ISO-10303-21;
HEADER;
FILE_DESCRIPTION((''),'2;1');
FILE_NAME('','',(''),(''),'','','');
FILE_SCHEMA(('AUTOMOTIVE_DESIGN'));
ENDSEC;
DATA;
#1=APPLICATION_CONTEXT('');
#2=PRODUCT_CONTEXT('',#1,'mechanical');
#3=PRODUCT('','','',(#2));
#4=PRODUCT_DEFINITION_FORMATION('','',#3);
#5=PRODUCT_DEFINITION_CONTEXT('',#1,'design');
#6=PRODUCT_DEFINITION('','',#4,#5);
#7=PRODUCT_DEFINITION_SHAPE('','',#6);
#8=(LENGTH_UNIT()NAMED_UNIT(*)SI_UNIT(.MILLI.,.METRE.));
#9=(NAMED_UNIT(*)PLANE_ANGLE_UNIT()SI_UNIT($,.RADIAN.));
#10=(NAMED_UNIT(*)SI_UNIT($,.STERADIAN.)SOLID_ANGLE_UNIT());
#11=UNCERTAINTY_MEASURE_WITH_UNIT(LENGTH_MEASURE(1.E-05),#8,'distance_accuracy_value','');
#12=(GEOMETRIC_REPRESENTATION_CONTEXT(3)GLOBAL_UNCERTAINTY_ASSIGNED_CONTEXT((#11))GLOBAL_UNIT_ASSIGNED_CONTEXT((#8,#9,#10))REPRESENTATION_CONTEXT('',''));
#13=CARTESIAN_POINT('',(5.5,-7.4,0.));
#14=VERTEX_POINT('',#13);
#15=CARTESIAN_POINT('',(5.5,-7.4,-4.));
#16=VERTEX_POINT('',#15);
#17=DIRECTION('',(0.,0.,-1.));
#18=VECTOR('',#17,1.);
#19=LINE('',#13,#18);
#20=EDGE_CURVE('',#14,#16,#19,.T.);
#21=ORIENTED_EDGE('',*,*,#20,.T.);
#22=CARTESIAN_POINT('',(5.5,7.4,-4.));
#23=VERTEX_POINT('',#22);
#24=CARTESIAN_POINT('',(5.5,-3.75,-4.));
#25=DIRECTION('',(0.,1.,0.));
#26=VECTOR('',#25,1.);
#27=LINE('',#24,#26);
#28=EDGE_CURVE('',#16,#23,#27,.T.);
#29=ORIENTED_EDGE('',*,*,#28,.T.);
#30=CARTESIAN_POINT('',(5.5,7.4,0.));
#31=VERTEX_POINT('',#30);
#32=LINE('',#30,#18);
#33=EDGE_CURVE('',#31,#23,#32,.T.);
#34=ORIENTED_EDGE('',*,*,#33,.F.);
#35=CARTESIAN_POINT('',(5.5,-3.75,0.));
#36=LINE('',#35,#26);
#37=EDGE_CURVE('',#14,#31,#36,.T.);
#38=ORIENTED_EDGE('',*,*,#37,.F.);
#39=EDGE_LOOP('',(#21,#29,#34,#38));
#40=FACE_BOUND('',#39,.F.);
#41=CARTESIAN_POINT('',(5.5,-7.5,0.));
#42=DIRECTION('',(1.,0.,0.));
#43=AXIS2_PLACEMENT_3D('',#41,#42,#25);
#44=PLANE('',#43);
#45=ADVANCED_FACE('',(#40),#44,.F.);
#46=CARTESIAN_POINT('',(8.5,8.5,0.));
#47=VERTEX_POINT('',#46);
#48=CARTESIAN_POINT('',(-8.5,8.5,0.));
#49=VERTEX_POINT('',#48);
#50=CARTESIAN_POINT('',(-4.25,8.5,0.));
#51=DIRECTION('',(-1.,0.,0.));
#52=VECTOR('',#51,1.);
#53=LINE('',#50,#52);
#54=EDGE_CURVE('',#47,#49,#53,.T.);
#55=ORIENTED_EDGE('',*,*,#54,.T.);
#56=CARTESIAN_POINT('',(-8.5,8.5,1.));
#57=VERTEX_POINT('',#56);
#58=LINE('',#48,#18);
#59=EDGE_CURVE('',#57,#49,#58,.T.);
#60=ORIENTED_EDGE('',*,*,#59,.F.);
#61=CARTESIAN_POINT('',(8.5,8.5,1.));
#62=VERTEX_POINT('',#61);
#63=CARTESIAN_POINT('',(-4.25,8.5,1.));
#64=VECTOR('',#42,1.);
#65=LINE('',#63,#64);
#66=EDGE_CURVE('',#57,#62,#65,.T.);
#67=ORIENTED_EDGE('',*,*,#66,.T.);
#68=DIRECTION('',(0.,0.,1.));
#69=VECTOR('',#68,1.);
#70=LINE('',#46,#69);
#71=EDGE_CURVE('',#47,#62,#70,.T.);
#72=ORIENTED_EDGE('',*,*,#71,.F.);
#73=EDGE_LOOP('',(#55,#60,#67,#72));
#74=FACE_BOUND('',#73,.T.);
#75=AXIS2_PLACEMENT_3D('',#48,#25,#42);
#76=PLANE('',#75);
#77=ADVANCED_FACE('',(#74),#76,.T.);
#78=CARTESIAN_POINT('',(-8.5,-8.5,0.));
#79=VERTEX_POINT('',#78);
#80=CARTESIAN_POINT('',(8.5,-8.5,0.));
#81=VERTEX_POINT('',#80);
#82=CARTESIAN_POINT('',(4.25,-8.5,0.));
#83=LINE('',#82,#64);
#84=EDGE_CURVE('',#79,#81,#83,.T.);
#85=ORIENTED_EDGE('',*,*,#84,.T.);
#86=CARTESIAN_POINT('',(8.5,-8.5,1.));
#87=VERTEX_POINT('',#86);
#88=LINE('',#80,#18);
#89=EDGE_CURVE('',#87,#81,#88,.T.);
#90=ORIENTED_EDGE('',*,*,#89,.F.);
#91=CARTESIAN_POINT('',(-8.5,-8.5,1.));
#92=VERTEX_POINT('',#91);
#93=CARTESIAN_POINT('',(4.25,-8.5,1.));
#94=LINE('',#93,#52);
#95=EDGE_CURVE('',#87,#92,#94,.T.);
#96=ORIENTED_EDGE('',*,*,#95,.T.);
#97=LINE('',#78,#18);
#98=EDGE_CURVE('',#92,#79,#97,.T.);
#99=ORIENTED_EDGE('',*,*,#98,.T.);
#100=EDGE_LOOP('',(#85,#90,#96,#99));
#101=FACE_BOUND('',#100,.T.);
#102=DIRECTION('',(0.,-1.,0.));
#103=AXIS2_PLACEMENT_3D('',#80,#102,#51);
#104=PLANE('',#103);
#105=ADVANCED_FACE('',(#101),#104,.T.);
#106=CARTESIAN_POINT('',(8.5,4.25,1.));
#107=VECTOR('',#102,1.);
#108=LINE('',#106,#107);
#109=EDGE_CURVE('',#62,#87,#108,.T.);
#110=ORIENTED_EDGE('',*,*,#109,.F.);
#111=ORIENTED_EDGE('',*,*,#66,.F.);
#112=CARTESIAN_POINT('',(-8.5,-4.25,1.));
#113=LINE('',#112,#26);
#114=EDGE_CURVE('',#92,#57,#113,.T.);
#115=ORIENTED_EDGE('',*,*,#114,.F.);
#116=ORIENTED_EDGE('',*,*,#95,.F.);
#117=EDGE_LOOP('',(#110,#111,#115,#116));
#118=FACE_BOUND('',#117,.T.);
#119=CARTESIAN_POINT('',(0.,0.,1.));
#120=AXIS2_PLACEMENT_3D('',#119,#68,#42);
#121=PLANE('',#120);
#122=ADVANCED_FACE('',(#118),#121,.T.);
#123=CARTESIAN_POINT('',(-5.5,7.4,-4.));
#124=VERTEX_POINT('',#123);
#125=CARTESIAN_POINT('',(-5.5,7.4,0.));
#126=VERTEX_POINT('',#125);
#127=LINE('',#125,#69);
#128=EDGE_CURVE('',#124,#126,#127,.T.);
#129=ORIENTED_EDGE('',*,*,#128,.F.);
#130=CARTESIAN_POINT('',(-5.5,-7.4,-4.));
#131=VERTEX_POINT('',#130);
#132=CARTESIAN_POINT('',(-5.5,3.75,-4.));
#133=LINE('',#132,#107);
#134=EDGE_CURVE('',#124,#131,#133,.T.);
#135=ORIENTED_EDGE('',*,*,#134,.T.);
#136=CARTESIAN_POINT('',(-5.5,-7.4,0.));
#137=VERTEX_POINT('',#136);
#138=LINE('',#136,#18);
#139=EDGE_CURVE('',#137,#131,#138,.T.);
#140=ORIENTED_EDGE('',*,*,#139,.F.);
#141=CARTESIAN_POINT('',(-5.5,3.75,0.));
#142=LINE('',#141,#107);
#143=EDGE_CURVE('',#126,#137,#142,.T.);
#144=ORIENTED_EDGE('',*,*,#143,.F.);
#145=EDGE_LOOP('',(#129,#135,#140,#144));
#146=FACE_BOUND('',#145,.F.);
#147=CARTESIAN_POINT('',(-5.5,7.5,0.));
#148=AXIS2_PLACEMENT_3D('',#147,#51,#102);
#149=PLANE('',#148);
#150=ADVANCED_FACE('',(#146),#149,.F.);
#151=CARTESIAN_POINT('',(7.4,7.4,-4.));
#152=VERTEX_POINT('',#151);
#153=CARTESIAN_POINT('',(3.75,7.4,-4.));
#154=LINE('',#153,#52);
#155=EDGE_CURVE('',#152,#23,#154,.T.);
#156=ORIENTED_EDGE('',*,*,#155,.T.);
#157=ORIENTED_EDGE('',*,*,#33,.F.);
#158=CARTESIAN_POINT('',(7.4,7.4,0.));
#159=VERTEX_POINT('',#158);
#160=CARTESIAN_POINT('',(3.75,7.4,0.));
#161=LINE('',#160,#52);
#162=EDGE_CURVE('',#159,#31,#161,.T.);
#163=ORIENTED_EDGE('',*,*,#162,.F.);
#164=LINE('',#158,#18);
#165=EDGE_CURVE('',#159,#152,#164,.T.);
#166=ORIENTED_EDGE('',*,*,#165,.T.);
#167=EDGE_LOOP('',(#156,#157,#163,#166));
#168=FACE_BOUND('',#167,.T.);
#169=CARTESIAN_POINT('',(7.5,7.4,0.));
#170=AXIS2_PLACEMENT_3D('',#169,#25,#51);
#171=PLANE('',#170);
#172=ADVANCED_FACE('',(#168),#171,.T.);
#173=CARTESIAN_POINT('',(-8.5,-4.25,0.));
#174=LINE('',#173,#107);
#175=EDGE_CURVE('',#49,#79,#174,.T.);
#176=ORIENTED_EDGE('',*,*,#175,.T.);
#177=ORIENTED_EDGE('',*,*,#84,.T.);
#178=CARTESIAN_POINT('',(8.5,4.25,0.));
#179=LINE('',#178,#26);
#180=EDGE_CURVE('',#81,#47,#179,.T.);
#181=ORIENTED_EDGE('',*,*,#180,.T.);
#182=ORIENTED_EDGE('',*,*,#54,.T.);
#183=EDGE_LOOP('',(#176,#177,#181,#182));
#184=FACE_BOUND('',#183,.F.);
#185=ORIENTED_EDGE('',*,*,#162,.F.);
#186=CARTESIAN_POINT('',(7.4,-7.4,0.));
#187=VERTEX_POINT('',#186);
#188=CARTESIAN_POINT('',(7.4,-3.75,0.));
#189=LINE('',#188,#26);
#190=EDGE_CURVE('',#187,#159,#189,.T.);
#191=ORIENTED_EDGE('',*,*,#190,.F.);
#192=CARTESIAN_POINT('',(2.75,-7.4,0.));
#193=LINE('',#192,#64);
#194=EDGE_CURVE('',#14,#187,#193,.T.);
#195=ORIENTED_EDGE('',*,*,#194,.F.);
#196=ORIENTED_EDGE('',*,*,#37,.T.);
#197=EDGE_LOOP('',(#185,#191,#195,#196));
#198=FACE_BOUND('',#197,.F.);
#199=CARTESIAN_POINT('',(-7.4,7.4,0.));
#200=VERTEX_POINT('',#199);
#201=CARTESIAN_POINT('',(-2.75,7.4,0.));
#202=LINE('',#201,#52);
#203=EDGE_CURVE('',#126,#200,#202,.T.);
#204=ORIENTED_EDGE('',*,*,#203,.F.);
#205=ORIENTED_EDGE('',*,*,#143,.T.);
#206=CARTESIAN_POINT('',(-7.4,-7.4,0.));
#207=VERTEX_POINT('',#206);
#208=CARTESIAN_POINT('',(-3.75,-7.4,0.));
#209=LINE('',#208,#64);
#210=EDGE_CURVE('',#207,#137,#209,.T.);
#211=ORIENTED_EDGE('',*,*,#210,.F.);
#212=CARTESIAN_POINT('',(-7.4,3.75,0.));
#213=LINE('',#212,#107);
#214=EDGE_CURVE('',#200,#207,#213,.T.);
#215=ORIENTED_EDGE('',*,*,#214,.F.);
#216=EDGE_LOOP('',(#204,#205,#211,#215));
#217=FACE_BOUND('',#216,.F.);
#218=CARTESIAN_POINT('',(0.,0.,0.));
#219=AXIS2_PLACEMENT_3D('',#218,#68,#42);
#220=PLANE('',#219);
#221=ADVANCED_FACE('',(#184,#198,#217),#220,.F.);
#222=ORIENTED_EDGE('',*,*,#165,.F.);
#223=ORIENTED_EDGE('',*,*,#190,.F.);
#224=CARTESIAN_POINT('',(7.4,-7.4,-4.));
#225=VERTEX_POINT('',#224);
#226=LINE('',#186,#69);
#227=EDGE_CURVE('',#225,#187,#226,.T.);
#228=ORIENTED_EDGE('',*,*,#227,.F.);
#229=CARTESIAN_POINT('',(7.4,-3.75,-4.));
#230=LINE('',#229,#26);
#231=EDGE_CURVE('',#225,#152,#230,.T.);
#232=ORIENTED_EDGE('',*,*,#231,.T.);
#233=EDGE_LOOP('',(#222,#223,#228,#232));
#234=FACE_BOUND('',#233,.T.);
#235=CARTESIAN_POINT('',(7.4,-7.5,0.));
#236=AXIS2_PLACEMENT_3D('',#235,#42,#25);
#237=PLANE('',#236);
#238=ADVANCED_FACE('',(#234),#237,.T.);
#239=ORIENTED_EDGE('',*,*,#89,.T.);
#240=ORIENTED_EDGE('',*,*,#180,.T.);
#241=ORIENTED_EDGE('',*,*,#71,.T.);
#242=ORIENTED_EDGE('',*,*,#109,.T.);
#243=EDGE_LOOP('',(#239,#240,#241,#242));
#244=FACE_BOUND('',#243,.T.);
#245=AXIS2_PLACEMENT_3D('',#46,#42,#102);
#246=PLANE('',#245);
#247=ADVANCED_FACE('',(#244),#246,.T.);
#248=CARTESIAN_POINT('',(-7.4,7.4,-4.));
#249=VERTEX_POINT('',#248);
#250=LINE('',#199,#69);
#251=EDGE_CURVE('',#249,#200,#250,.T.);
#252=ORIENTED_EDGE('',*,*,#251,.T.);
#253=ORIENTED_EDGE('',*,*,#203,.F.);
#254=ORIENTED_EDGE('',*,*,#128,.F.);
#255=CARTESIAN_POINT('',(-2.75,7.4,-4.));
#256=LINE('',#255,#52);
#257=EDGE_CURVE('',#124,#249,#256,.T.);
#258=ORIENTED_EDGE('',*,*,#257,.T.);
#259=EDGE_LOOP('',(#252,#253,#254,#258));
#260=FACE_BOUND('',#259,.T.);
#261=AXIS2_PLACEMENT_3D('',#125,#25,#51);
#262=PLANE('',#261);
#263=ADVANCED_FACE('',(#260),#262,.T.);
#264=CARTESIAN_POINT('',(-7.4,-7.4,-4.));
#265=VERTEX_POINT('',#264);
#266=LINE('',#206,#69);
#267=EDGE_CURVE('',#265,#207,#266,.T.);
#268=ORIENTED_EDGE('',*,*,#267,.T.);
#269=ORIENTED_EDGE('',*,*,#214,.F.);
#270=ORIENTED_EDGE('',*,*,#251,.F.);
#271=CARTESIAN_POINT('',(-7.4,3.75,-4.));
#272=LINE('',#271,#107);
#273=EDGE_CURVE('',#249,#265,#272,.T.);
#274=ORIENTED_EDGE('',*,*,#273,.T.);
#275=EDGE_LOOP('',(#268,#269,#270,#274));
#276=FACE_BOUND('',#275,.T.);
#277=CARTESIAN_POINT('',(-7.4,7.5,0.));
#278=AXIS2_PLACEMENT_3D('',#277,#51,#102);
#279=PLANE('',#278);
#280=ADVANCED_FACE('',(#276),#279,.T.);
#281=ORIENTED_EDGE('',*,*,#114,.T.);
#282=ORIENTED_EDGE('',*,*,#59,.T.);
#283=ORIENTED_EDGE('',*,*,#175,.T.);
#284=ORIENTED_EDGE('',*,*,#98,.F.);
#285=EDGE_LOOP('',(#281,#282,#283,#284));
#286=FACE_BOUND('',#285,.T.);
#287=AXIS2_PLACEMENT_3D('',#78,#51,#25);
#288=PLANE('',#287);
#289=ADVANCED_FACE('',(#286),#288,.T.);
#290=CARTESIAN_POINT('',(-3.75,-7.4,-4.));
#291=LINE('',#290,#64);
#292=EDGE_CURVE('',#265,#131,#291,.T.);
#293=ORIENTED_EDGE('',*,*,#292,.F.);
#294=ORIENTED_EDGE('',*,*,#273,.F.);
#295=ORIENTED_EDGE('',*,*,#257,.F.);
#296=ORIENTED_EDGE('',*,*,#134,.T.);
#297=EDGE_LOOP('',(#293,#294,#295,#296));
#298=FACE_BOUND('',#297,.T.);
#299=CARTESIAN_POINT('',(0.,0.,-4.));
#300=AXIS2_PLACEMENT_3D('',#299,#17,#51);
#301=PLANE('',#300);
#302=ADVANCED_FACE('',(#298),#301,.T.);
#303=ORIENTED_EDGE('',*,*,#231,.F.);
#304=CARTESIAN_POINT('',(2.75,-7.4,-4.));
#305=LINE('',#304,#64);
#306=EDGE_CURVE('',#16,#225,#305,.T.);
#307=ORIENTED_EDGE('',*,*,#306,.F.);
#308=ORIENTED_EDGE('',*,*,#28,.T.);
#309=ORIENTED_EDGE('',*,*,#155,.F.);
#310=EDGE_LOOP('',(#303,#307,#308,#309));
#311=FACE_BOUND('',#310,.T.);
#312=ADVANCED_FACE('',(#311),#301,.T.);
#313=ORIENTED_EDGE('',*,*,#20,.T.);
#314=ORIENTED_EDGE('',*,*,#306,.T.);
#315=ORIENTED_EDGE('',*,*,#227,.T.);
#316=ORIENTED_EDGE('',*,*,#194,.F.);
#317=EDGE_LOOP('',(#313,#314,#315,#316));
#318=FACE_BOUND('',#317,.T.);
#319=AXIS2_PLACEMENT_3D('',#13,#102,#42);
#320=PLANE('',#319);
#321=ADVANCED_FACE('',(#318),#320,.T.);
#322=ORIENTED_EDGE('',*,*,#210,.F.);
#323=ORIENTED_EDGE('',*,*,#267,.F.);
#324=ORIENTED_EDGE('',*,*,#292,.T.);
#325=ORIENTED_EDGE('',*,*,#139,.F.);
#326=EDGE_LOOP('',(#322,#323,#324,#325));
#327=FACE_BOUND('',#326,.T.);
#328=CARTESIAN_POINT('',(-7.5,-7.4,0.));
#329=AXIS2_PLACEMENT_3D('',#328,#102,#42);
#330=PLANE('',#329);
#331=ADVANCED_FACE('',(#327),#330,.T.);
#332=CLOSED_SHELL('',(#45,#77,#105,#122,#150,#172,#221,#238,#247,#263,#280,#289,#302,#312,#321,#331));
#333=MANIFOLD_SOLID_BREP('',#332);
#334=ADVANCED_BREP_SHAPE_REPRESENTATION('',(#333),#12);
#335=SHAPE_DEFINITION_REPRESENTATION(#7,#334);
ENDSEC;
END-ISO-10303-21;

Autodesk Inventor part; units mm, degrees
ref_plane "YZ Plane" through (0, 0, 0) normal (1, 0, 0) x (0, 1, 0)
ref_plane "XZ Plane" through (0, 0, 0) normal (0, 1, 0) x (-1, 0, 0)
ref_plane "XY Plane" through (0, 0, 0) normal (0, 0, 1) x (1, 0, 0)
sketch "Sketch1" plane through (0, 0, 0) normal (0, 0, 1) x (1, 0, 0)
  line L0 (7.5, 7.5) -> (-7.5, 7.5) projected
  line L1 (7.5, 7.5) -> (-7.5, 7.5) projected
  line L2 (-7.5, 7.5) -> (-7.5, -7.5) projected
  line L3 (-7.5, -7.5) -> (7.5, -7.5) projected
  line L4 (7.5, -7.5) -> (7.5, 7.5) projected
  line L5 (-8.5, 8.5) -> (8.5, 8.5) projected
  line L6 (8.5, 8.5) -> (8.5, -8.5) projected
  line L7 (8.5, -8.5) -> (-8.5, -8.5) projected
  line L8 (-8.5, -8.5) -> (-8.5, 8.5) projected
  point P0 (0, 0)
extrude "Extrusion1" add sketch "Sketch1" along normal blind 1 contours L4 L3 L2 L0 | L5 L6 L7 L8
sketch "Sketch2" plane through (0, 0, 0) normal (0, 0, -1) x (-1, 0, 0)
  line L0 (-7.5, 7.5) -> (7.5, 7.5) projected
  line L1 (7.5, 7.5) -> (7.5, -7.5) projected
  line L2 (7.5, -7.5) -> (-7.5, -7.5) projected
  line L3 (-7.5, -7.5) -> (-7.5, 7.5) projected
  line L4 (8.5, 8.5) -> (-8.5, 8.5) projected
  line L5 (-8.5, 8.5) -> (-8.5, -8.5) projected
  line L6 (-8.5, -8.5) -> (8.5, -8.5) projected
  line L7 (8.5, -8.5) -> (8.5, 8.5) projected
  line L8 (-7.5, -7.5) -> (-5.5, -7.5)
  line L9 (-5.5, -7.5) -> (-5.5, 7.5)
  line L10 (-5.5, 7.5) -> (-7.5, 7.5)
  line L11 (-7.5, 7.5) -> (-7.5, -7.5)
  line L12 (7.5, 7.5) -> (5.5, 7.5)
  line L13 (5.5, 7.5) -> (5.5, -7.5)
  line L14 (5.5, -7.5) -> (7.5, -7.5)
  line L15 (7.5, -7.5) -> (7.5, 7.5)
  point P0 (0, 0)
  dimension "d2" = 2
  dimension "d3" = 2
extrude "Extrusion2" add sketch "Sketch2" along normal blind 4 contours L0 L9 L2 L3 | L0 L1 L2 L13
thicken "Thicken1" operation add thickness 0.1 both sides no extend neighbours yes toward (0, -1, 0) faces at (6.1667, 7.5, -1.3333) (7.5, 2.5, -1.3333) (6.8333, -7.5, -1.3333)
thicken "Thicken2" operation add thickness 0.1 both sides no extend neighbours yes toward (0, 1, 0) faces at (-6.1667, -7.5, -1.3333) (-7.5, -2.5, -1.3333) (-6.8333, 7.5, -1.3333)
properties part number "hull_cover_cover"
